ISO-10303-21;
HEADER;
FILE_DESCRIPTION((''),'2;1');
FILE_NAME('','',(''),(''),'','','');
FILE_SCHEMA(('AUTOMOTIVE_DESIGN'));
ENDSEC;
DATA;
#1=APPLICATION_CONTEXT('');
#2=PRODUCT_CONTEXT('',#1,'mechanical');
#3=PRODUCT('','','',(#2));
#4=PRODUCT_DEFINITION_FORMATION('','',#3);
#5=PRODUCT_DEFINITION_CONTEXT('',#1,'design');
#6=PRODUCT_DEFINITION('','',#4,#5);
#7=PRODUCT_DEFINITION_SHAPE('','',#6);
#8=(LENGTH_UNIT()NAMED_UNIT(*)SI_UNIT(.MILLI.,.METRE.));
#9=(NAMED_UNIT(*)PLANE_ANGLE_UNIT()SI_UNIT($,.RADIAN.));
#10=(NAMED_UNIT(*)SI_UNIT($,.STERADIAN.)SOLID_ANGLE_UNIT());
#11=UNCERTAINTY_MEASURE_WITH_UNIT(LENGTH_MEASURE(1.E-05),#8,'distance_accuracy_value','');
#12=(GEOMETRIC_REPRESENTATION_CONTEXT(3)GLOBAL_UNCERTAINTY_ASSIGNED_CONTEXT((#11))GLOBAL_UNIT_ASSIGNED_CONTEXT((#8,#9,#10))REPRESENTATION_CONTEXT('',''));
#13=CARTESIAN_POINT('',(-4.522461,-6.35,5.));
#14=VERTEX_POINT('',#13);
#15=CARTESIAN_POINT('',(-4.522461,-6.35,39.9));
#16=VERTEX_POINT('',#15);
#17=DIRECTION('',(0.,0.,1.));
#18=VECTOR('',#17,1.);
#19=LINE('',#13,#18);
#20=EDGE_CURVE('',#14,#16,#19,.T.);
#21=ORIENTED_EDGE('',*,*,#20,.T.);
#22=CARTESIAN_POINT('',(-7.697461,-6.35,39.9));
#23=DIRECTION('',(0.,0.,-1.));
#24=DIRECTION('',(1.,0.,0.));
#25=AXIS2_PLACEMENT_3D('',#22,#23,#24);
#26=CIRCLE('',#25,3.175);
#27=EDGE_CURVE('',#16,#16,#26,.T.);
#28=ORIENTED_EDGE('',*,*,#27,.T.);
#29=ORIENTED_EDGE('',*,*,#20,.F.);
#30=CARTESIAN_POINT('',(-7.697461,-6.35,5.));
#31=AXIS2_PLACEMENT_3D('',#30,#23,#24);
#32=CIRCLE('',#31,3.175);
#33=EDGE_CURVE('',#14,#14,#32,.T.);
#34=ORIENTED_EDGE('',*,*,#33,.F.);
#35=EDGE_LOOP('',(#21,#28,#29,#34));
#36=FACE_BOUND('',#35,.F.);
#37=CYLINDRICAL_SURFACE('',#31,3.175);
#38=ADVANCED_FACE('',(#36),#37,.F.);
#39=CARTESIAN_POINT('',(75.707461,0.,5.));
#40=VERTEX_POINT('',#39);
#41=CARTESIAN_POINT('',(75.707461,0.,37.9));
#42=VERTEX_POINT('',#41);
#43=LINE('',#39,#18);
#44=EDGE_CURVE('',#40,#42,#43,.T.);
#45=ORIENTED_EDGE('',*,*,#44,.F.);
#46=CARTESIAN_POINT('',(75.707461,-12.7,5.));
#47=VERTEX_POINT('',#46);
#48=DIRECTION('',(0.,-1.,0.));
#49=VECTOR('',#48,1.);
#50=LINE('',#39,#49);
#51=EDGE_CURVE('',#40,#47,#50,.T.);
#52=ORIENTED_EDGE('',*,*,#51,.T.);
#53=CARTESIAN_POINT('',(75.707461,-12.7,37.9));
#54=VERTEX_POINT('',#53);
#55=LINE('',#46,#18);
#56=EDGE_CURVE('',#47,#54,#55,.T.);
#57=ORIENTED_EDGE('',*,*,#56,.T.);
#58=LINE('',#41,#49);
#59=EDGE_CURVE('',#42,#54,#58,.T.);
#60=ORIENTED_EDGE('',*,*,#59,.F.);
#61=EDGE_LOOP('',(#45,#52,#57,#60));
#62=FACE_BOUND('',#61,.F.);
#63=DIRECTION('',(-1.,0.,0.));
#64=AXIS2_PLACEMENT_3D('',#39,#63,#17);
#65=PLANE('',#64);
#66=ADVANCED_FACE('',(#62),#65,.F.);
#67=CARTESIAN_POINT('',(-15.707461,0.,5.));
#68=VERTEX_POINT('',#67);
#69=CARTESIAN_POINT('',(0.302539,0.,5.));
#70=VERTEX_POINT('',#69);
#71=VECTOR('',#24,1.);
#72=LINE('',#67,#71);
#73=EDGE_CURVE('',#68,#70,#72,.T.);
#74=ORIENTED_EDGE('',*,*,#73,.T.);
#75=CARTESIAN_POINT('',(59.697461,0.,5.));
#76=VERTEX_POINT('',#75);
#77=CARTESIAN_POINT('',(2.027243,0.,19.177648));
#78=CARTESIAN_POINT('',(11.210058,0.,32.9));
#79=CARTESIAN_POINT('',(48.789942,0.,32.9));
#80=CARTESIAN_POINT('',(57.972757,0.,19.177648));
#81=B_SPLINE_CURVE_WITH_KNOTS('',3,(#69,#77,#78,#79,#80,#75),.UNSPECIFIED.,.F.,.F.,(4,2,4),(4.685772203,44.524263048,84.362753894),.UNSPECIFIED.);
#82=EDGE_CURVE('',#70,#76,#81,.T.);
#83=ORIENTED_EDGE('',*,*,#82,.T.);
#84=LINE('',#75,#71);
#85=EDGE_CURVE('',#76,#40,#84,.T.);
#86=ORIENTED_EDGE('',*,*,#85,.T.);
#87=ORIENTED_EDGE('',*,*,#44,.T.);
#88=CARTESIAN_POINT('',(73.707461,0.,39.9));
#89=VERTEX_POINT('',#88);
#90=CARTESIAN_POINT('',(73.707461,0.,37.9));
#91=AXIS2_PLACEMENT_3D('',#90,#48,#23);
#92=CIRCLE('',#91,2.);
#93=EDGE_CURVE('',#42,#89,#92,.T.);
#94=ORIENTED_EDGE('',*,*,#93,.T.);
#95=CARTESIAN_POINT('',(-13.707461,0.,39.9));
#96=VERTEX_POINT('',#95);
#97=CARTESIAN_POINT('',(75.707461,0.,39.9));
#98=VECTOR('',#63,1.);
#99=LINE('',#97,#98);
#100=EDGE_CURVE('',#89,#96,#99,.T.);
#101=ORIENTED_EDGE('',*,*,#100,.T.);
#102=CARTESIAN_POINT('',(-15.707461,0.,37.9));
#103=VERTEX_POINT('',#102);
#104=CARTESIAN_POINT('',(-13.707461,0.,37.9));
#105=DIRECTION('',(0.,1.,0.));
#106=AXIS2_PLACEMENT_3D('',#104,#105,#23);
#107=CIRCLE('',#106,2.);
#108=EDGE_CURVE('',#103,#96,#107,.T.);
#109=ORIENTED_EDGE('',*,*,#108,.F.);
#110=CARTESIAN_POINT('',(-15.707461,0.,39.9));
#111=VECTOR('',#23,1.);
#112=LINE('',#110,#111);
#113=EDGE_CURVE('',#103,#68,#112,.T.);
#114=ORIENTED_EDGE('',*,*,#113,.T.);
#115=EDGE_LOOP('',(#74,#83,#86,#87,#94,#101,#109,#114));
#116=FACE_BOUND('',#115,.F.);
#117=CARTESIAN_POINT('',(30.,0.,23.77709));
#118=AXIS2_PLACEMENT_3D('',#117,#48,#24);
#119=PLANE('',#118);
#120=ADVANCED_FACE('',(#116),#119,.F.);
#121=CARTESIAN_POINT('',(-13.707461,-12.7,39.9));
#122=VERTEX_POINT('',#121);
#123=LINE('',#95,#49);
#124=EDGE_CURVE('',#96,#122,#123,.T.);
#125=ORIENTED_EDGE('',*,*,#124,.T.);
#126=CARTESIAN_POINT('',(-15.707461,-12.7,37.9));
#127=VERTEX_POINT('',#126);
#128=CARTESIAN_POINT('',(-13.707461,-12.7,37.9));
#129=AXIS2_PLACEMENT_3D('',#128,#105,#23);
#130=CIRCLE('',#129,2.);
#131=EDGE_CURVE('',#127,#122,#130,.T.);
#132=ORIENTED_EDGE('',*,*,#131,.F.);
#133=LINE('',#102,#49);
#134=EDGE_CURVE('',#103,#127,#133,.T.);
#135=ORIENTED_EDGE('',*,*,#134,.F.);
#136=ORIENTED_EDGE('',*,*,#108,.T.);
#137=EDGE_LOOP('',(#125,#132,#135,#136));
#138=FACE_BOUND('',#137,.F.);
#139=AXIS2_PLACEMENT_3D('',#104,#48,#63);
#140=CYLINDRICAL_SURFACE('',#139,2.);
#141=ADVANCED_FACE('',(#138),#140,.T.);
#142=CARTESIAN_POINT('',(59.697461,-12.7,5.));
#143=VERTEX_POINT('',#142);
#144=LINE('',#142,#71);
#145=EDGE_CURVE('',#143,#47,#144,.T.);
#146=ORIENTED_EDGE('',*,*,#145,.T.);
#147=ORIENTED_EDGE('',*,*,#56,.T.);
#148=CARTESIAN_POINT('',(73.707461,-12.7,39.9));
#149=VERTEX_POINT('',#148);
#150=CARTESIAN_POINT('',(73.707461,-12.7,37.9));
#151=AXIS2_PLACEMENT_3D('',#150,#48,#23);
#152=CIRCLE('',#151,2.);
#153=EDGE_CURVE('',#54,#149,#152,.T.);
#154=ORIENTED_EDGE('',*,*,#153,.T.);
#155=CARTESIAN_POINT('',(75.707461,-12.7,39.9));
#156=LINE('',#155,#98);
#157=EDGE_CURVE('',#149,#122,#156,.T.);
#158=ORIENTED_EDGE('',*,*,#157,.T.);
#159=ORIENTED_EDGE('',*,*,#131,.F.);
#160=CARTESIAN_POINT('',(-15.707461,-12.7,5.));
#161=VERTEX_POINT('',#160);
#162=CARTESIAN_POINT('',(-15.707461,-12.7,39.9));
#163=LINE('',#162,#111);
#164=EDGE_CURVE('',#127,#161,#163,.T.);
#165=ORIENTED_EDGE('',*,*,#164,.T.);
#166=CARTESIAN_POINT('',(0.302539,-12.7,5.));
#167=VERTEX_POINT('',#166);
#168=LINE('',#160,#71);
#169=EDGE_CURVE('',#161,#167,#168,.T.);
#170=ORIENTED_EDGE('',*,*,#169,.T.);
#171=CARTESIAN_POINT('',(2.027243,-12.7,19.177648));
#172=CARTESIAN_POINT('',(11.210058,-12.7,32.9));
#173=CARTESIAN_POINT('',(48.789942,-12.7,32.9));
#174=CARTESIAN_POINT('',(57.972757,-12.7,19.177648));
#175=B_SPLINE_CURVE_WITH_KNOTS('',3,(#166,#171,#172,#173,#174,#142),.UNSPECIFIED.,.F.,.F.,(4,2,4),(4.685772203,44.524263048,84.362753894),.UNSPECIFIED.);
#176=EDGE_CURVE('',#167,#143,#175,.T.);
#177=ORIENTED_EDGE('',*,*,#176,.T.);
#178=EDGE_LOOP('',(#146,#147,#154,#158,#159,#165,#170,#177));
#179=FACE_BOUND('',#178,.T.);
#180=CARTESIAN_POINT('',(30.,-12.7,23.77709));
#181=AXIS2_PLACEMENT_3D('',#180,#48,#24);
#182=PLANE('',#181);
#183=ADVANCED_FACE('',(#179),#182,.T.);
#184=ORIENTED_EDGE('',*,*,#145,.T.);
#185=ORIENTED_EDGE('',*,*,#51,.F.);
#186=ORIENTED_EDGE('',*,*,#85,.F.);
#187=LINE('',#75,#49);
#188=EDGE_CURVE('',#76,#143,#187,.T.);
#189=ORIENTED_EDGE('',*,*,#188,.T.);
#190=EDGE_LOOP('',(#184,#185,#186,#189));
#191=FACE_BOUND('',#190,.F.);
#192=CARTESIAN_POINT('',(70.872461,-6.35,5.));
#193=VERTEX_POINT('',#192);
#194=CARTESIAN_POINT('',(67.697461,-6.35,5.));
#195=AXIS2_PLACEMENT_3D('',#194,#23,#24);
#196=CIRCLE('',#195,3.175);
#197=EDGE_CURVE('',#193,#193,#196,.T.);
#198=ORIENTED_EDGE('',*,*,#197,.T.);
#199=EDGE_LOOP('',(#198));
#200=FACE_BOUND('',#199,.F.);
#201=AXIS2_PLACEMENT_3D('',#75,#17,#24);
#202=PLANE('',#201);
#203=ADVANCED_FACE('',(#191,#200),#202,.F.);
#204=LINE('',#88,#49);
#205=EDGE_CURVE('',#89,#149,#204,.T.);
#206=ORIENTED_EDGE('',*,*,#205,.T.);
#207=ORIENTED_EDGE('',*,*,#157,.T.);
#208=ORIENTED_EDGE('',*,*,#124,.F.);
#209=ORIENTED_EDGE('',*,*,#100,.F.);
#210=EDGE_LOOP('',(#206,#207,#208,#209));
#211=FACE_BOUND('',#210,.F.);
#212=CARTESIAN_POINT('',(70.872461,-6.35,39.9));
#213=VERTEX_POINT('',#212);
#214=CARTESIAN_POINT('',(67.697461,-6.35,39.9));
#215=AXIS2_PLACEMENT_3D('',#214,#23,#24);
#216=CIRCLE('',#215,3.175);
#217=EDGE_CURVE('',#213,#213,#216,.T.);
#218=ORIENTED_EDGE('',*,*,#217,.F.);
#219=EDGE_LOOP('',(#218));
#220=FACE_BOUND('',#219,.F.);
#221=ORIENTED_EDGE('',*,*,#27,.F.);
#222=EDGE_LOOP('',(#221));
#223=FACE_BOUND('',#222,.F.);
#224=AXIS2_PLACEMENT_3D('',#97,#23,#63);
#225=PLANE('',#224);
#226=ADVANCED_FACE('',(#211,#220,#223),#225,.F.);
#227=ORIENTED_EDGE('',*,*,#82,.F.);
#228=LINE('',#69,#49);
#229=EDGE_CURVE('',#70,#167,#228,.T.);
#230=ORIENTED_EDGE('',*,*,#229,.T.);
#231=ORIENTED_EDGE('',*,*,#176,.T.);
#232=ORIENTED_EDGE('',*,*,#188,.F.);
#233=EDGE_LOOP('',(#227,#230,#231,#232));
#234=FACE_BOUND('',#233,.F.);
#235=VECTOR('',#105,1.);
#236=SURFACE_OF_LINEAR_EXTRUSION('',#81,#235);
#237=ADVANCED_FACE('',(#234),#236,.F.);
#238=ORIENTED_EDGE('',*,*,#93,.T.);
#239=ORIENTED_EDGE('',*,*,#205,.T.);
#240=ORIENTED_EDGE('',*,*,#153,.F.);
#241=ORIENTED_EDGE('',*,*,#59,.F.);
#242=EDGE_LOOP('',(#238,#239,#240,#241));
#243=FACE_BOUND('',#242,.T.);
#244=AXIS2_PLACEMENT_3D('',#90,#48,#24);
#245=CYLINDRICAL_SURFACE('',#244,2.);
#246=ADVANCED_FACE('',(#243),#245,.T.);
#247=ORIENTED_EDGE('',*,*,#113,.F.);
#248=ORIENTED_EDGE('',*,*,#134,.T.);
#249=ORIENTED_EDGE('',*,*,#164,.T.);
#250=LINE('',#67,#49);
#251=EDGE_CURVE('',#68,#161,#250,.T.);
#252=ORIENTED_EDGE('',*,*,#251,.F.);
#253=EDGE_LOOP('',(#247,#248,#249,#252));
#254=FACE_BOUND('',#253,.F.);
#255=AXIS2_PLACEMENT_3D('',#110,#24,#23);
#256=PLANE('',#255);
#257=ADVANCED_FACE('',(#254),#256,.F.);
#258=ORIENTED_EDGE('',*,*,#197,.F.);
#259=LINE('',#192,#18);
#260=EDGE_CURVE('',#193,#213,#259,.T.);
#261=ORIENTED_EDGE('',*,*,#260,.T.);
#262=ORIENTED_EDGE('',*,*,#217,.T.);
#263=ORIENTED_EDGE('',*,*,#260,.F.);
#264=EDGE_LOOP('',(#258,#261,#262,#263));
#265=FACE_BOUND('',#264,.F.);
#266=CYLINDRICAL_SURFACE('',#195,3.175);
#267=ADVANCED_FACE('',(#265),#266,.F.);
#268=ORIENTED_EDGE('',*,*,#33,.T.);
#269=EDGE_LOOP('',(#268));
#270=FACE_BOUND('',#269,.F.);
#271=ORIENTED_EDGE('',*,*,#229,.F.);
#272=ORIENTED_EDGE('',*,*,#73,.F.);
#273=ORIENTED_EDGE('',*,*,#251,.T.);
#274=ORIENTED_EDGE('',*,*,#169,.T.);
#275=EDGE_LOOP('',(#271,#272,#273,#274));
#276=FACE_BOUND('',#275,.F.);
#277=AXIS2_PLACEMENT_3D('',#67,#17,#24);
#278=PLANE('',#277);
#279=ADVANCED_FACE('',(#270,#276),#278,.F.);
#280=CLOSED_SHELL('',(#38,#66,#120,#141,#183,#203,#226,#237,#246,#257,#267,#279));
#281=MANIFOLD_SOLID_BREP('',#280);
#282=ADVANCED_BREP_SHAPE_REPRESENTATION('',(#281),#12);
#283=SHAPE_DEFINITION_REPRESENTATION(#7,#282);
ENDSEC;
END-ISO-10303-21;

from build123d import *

# Parameters (mm, degrees)
F1_DEPTH = 12.7
F2_R     = 3.175
F3_DEPTH = 34.9
F4_R     = 3.175
F5_DEPTH = 34.9
F6_R     = 2


with BuildPart() as f1:
    # F0 (on Front) → F1 (new body)
    with BuildSketch(Plane.XZ):
        with BuildLine():
            Line((-5.8658062685, 5), (0.3025391327, 5))
            add(Edge.make_bspline(
                [(0.3025391327, 5), (2.0272433596, 19.1776482129), (11.2100582813, 32.9), (30, 32.9)],
                knots=[4.6857722032, 4.6857722032, 4.6857722032, 4.6857722032, 44.5242630484, 44.5242630484, 44.5242630484, 44.5242630484], degree=3))
            add(Edge.make_bspline(
                [(59.6974608673, 5), (57.9727566404, 19.1776482129), (48.7899417187, 32.9), (30, 32.9)],
                knots=[4.6857722032, 4.6857722032, 4.6857722032, 4.6857722032, 44.5242630484, 44.5242630484, 44.5242630484, 44.5242630484], degree=3))
            Line((59.6974608673, 5), (65.8658062685, 5))
            add(Edge.make_bspline(
                [(65.8658062685, 5), (65.8175694138, 5.6045543906), (65.5206979037, 8.5111158621), (64.3376946497, 13.6666771768), (61.7778690019, 20.2490905933), (57.9831497379, 26.3746466103), (52.8726260404, 31.7533398634), (46.3887061881, 35.9435716124), (39.581089223, 38.4154216198), (34.9653521704, 38.8398717945), (33.0331003636, 38.9)],
                knots=[5.0019704128, 5.0019704128, 5.0019704128, 5.0019704128, 6.8206255364, 13.7629955356, 20.7886344542, 27.9249237942, 35.2442046754, 42.8555124684, 50.901123614, 56.6904025365, 56.6904025365, 56.6904025365, 56.6904025365], degree=3))
            Line((33.0331003636, 38.9), (30, 38.9))
            Line((30, 38.9), (26.9668996364, 38.9))
            add(Edge.make_bspline(
                [(-5.8658062685, 5), (-5.8175694138, 5.6045543906), (-5.5206979037, 8.5111158621), (-4.3376946497, 13.6666771768), (-1.7778690019, 20.2490905933), (2.0168502621, 26.3746466103), (7.1273739596, 31.7533398634), (13.6112938119, 35.9435716124), (20.418910777, 38.4154216198), (25.0346478296, 38.8398717945), (26.9668996364, 38.9)],
                knots=[5.0019704128, 5.0019704128, 5.0019704128, 5.0019704128, 6.8206255364, 13.7629955356, 20.7886344542, 27.9249237942, 35.2442046754, 42.8555124684, 50.901123614, 56.6904025365, 56.6904025365, 56.6904025365, 56.6904025365], degree=3))
        make_face()
        with BuildLine():
            Line((-15.7074608673, 5), (-5.8658062685, 5))
            add(Edge.make_bspline(
                [(-5.8658062685, 5), (-5.8175694138, 5.6045543906), (-5.5206979037, 8.5111158621), (-4.3376946497, 13.6666771768), (-1.7778690019, 20.2490905933), (2.0168502621, 26.3746466103), (7.1273739596, 31.7533398634), (13.6112938119, 35.9435716124), (20.418910777, 38.4154216198), (25.0346478296, 38.8398717945), (26.9668996364, 38.9)],
                knots=[5.0019704128, 5.0019704128, 5.0019704128, 5.0019704128, 6.8206255364, 13.7629955356, 20.7886344542, 27.9249237942, 35.2442046754, 42.8555124684, 50.901123614, 56.6904025365, 56.6904025365, 56.6904025365, 56.6904025365], degree=3))
            Line((26.9668996364, 38.9), (-15.7074608673, 38.9))
            Line((-15.7074608673, 38.9), (-15.7074608673, 5))
        make_face()
        with BuildLine():
            add(Edge.make_bspline(
                [(65.8658062685, 5), (65.8175694138, 5.6045543906), (65.5206979037, 8.5111158621), (64.3376946497, 13.6666771768), (61.7778690019, 20.2490905933), (57.9831497379, 26.3746466103), (52.8726260404, 31.7533398634), (46.3887061881, 35.9435716124), (39.581089223, 38.4154216198), (34.9653521704, 38.8398717945), (33.0331003636, 38.9)],
                knots=[5.0019704128, 5.0019704128, 5.0019704128, 5.0019704128, 6.8206255364, 13.7629955356, 20.7886344542, 27.9249237942, 35.2442046754, 42.8555124684, 50.901123614, 56.6904025365, 56.6904025365, 56.6904025365, 56.6904025365], degree=3))
            Line((65.8658062685, 5), (75.7074608673, 5))
            Line((75.7074608673, 5), (75.7074608673, 38.9))
            Line((75.7074608673, 38.9), (33.0331003636, 38.9))
        make_face()
        with BuildLine():
            Line((-15.7074608673, 38.9), (26.9668996364, 38.9))
            add(Edge.make_bspline(
                [(26.9668996364, 38.9), (27.9792387785, 38.9315021757), (28.9917902537, 38.9307560105), (30, 38.9)],
                knots=[56.6904025365, 56.6904025365, 56.6904025365, 56.6904025365, 59.7235029001, 59.7235029001, 59.7235029001, 59.7235029001], degree=3))
            add(Edge.make_bspline(
                [(33.0331003636, 38.9), (32.0207612215, 38.9315021757), (31.0082097463, 38.9307560105), (30, 38.9)],
                knots=[56.6904025365, 56.6904025365, 56.6904025365, 56.6904025365, 59.7235029001, 59.7235029001, 59.7235029001, 59.7235029001], degree=3))
            Line((33.0331003636, 38.9), (75.7074608673, 38.9))
            Line((75.7074608673, 38.9), (75.7074608673, 39.9))
            Line((75.7074608673, 39.9), (-15.7074608673, 39.9))
            Line((-15.7074608673, 39.9), (-15.7074608673, 38.9))
        make_face()
        with BuildLine():
            add(Edge.make_bspline(
                [(26.9668996364, 38.9), (27.9792387785, 38.9315021757), (28.9917902537, 38.9307560105), (30, 38.9)],
                knots=[56.6904025365, 56.6904025365, 56.6904025365, 56.6904025365, 59.7235029001, 59.7235029001, 59.7235029001, 59.7235029001], degree=3))
            Line((26.9668996364, 38.9), (30, 38.9))
        make_face()
        with BuildLine():
            Line((30, 38.9), (33.0331003636, 38.9))
            add(Edge.make_bspline(
                [(33.0331003636, 38.9), (32.0207612215, 38.9315021757), (31.0082097463, 38.9307560105), (30, 38.9)],
                knots=[56.6904025365, 56.6904025365, 56.6904025365, 56.6904025365, 59.7235029001, 59.7235029001, 59.7235029001, 59.7235029001], degree=3))
        make_face()
    extrude(amount=F1_DEPTH)

    # F2 (on face) → F3 (cut, through all)
    with BuildSketch(Plane(origin=(0, 0, 5), x_dir=(1, 0, 0), z_dir=(0, 0, -1))):
        with Locations((-7.6974608673, 6.35)):
            Circle(F2_R)
    extrude(amount=-F3_DEPTH, mode=Mode.SUBTRACT)

    # F4 (on face) → F5 (cut, through all)
    with BuildSketch(Plane(origin=(0, 0, 5), x_dir=(1, 0, 0), z_dir=(0, 0, -1))):
        with Locations((67.6974608673, 6.35)):
            Circle(F4_R)
    extrude(amount=-F5_DEPTH, mode=Mode.SUBTRACT)

    # F6
    f6_edges = [f1.edges().sort_by_distance(p)[0] for p in [
        (-15.707461, -6.35, 39.9),
        (75.707461, -6.35, 39.9),
    ]]
    fillet(f6_edges, radius=F6_R)


solid = f1.part
